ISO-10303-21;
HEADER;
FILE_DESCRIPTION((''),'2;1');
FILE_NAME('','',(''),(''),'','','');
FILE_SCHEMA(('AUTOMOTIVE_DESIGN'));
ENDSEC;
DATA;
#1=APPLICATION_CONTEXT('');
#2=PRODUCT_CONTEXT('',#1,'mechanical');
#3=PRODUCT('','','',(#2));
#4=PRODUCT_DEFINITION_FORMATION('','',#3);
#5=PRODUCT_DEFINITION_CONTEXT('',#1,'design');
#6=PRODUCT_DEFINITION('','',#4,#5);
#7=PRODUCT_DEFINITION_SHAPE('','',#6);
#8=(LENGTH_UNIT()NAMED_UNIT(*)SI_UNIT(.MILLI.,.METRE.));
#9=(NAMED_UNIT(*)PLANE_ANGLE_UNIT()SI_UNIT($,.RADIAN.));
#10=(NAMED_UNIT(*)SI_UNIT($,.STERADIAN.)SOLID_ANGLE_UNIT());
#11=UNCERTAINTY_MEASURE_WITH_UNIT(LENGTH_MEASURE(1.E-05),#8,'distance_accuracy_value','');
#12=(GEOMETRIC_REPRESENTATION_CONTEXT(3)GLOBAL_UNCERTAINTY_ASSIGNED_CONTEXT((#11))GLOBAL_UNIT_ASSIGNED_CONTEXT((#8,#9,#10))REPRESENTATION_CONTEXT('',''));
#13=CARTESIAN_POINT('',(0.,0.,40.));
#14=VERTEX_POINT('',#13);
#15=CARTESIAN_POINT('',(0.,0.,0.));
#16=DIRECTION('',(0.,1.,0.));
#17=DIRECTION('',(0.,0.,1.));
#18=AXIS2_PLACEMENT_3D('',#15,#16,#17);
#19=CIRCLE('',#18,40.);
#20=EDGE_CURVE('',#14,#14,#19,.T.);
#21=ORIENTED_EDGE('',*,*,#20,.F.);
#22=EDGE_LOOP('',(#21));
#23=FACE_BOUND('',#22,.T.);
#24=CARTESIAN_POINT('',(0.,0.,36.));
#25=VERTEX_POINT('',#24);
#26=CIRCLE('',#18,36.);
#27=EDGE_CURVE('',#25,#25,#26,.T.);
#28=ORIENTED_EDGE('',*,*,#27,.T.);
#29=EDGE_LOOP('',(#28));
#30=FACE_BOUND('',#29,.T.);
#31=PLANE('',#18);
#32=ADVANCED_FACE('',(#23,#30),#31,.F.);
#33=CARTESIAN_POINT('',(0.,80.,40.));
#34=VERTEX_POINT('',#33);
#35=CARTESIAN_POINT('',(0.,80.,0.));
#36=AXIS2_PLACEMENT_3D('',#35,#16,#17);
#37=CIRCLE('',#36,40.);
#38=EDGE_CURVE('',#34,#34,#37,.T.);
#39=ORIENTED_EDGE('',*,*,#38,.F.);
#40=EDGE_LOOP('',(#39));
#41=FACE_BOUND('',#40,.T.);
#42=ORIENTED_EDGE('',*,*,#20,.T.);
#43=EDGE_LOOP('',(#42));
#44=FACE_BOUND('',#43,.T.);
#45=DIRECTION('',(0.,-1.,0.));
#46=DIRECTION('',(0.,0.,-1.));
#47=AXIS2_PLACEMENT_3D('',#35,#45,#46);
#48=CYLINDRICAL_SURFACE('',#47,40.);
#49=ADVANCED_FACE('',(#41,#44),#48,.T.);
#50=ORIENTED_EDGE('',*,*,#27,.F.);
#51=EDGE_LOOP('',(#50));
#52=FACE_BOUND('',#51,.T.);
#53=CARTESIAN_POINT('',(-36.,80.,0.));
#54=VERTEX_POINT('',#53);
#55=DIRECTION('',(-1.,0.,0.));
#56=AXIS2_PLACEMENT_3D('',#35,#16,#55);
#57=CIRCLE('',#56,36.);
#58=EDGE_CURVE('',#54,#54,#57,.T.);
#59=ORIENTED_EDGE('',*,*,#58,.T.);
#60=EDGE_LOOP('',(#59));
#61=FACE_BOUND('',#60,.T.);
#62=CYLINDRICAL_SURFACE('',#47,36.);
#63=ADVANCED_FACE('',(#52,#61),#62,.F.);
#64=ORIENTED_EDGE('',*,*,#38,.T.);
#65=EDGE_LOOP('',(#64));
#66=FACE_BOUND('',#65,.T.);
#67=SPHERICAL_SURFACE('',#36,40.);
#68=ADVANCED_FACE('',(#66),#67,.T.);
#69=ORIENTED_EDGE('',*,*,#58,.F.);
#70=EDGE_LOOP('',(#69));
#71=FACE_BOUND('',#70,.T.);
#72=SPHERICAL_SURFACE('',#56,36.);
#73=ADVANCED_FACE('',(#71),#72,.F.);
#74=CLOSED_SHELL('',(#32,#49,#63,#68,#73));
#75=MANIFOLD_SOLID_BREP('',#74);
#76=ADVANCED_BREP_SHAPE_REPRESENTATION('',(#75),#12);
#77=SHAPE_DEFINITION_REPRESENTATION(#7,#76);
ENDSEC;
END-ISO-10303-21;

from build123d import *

# Parameters (mm, degrees)
SKETCH1_R           = 40
SKETCH1_R_2         = 36
BOSS_EXTRUDE1_DEPTH = 80


# Read off the part's stored shape, not the designer's step: Revolve1
with BuildPart() as part:
    # Sketch1 → Boss-Extrude1 (new body)
    with BuildSketch(Plane(origin=(0, 0, 0), x_dir=(1, 0, 0), z_dir=(0, 1, 0))):
        with Locations(Location((0, 0, 0), (0, 0, 270))):
            Circle(SKETCH1_R)
        with Locations(Location((0, 0, 0), (0, 0, 270))):
            Circle(SKETCH1_R_2, mode=Mode.SUBTRACT)
    extrude(amount=BOSS_EXTRUDE1_DEPTH)

    # Revolve1 outline → Revolve1 (revolve)
    with BuildSketch(Plane.XY):
        with BuildLine():
            ThreePointArc((0, 116), (25.455844135, 105.45584411), (36, 79.999999964))
            Line((36, 79.999999964), (40, 79.99999997))
            ThreePointArc((40, 79.99999997), (28.284271258, 108.284271237), (0, 120))
            Line((0, 120), (0, 116))
        make_face()
    revolve(axis=Axis((0, 0, 0), (0, 1, 0)))


solid = part.part
